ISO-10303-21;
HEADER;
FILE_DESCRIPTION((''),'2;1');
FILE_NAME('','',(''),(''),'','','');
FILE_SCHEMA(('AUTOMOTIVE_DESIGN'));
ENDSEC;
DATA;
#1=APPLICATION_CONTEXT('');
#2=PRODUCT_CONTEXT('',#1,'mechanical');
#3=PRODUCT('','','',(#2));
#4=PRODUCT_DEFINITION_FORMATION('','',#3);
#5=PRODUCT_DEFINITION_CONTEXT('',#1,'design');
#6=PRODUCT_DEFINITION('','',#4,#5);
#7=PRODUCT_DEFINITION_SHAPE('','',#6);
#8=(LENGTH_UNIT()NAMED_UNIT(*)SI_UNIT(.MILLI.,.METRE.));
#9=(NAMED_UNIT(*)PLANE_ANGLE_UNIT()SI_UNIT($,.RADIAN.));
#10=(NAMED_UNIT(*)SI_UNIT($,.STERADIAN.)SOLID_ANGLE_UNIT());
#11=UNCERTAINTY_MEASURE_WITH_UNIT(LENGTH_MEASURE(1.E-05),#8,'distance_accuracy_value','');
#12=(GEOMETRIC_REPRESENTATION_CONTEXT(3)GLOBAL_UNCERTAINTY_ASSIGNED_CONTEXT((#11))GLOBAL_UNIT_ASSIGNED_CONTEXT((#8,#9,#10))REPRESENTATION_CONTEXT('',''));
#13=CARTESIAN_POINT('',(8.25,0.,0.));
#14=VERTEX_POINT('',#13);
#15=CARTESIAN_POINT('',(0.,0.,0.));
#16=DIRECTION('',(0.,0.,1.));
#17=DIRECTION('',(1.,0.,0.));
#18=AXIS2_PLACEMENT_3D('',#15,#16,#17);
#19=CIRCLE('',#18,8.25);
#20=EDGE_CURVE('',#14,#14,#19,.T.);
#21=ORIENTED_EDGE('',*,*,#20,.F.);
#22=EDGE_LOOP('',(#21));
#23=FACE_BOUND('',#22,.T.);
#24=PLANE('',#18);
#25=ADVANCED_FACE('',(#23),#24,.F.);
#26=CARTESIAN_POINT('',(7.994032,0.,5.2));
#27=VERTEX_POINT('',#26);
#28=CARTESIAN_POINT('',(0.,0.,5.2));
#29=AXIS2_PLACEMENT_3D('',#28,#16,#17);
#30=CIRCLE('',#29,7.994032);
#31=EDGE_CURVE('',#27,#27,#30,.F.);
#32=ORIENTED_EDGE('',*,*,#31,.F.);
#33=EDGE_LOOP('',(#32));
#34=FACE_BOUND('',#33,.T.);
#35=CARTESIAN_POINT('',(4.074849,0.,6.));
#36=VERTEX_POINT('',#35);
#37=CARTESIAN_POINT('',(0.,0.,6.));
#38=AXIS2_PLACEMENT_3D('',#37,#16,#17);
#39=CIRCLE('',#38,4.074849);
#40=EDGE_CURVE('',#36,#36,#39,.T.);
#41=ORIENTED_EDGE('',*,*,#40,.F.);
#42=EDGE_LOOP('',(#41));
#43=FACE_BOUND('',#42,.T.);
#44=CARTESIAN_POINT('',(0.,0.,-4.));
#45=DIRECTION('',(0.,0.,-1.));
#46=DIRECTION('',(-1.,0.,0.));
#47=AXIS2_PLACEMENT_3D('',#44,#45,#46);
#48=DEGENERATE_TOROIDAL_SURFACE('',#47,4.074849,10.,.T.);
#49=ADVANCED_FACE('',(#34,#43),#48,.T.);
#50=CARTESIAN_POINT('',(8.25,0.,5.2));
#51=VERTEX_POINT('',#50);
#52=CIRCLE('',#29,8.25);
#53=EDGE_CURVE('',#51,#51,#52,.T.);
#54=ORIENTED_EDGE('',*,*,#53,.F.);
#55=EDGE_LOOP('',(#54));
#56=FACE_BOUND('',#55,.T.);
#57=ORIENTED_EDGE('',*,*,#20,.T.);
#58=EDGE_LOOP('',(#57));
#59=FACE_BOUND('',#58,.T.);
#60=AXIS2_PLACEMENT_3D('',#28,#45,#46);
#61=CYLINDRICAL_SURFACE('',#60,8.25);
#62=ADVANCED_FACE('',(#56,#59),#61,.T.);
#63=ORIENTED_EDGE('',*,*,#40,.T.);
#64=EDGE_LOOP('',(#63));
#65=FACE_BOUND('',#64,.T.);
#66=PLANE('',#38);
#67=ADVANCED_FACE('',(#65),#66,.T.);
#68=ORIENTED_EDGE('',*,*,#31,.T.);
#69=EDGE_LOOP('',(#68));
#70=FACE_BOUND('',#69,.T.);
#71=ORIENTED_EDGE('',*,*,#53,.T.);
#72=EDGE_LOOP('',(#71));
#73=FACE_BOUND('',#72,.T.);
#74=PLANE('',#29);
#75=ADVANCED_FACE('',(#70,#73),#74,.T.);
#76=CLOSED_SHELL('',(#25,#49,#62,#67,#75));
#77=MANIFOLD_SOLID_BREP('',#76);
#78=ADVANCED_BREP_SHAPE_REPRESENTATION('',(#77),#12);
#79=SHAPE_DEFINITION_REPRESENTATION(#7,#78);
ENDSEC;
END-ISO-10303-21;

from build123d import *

# Parameters (mm, degrees)
SKETCH1_R           = 8.25
BOSS_EXTRUDE1_DEPTH = 5.2
SKETCH1_4_R         = 7.994032283
BOSS_EXTRUDE3_DEPTH = 6
FILLET1_R           = 10


with BuildPart() as part:
    # Sketch1 → Boss-Extrude1 (new body)
    with BuildSketch(Plane.XY):
        Circle(SKETCH1_R)
    extrude(amount=BOSS_EXTRUDE1_DEPTH)

    # Sketch1<4> → Boss-Extrude3 (add)
    with BuildSketch(Plane.XY):
        Circle(SKETCH1_4_R)
    extrude(amount=BOSS_EXTRUDE3_DEPTH)

    # Fillet1
    # the kernel refuses this fillet: 10 mm, written as the material it takes off along each edge
    with BuildSketch(Plane(origin=(0, 0, 6), x_dir=(1, 0, 0), z_dir=(0, -1, 0))) as fillet1_piece_1:
        with BuildLine():
            CenterArc((4.074848695, -10), FILLET1_R, 66.926081934, 23.073918066)
            Line((4.074848695, 0), (4.074848695, 0.2))
            Line((4.074848695, 0.2), (7.994032283, 0.2))
            Line((7.994032283, 0.2), (8.194032283, 0))
            ThreePointArc((8.194032283, 0), (8.194032283, -0.4), (8.072415955, -0.616))
            Line((8.072415955, -0.616), (7.994032283, -0.8))
        make_face()
    revolve(axis=Axis((0, 0, 6), (0, 0, 1)), mode=Mode.SUBTRACT)


solid = part.part
